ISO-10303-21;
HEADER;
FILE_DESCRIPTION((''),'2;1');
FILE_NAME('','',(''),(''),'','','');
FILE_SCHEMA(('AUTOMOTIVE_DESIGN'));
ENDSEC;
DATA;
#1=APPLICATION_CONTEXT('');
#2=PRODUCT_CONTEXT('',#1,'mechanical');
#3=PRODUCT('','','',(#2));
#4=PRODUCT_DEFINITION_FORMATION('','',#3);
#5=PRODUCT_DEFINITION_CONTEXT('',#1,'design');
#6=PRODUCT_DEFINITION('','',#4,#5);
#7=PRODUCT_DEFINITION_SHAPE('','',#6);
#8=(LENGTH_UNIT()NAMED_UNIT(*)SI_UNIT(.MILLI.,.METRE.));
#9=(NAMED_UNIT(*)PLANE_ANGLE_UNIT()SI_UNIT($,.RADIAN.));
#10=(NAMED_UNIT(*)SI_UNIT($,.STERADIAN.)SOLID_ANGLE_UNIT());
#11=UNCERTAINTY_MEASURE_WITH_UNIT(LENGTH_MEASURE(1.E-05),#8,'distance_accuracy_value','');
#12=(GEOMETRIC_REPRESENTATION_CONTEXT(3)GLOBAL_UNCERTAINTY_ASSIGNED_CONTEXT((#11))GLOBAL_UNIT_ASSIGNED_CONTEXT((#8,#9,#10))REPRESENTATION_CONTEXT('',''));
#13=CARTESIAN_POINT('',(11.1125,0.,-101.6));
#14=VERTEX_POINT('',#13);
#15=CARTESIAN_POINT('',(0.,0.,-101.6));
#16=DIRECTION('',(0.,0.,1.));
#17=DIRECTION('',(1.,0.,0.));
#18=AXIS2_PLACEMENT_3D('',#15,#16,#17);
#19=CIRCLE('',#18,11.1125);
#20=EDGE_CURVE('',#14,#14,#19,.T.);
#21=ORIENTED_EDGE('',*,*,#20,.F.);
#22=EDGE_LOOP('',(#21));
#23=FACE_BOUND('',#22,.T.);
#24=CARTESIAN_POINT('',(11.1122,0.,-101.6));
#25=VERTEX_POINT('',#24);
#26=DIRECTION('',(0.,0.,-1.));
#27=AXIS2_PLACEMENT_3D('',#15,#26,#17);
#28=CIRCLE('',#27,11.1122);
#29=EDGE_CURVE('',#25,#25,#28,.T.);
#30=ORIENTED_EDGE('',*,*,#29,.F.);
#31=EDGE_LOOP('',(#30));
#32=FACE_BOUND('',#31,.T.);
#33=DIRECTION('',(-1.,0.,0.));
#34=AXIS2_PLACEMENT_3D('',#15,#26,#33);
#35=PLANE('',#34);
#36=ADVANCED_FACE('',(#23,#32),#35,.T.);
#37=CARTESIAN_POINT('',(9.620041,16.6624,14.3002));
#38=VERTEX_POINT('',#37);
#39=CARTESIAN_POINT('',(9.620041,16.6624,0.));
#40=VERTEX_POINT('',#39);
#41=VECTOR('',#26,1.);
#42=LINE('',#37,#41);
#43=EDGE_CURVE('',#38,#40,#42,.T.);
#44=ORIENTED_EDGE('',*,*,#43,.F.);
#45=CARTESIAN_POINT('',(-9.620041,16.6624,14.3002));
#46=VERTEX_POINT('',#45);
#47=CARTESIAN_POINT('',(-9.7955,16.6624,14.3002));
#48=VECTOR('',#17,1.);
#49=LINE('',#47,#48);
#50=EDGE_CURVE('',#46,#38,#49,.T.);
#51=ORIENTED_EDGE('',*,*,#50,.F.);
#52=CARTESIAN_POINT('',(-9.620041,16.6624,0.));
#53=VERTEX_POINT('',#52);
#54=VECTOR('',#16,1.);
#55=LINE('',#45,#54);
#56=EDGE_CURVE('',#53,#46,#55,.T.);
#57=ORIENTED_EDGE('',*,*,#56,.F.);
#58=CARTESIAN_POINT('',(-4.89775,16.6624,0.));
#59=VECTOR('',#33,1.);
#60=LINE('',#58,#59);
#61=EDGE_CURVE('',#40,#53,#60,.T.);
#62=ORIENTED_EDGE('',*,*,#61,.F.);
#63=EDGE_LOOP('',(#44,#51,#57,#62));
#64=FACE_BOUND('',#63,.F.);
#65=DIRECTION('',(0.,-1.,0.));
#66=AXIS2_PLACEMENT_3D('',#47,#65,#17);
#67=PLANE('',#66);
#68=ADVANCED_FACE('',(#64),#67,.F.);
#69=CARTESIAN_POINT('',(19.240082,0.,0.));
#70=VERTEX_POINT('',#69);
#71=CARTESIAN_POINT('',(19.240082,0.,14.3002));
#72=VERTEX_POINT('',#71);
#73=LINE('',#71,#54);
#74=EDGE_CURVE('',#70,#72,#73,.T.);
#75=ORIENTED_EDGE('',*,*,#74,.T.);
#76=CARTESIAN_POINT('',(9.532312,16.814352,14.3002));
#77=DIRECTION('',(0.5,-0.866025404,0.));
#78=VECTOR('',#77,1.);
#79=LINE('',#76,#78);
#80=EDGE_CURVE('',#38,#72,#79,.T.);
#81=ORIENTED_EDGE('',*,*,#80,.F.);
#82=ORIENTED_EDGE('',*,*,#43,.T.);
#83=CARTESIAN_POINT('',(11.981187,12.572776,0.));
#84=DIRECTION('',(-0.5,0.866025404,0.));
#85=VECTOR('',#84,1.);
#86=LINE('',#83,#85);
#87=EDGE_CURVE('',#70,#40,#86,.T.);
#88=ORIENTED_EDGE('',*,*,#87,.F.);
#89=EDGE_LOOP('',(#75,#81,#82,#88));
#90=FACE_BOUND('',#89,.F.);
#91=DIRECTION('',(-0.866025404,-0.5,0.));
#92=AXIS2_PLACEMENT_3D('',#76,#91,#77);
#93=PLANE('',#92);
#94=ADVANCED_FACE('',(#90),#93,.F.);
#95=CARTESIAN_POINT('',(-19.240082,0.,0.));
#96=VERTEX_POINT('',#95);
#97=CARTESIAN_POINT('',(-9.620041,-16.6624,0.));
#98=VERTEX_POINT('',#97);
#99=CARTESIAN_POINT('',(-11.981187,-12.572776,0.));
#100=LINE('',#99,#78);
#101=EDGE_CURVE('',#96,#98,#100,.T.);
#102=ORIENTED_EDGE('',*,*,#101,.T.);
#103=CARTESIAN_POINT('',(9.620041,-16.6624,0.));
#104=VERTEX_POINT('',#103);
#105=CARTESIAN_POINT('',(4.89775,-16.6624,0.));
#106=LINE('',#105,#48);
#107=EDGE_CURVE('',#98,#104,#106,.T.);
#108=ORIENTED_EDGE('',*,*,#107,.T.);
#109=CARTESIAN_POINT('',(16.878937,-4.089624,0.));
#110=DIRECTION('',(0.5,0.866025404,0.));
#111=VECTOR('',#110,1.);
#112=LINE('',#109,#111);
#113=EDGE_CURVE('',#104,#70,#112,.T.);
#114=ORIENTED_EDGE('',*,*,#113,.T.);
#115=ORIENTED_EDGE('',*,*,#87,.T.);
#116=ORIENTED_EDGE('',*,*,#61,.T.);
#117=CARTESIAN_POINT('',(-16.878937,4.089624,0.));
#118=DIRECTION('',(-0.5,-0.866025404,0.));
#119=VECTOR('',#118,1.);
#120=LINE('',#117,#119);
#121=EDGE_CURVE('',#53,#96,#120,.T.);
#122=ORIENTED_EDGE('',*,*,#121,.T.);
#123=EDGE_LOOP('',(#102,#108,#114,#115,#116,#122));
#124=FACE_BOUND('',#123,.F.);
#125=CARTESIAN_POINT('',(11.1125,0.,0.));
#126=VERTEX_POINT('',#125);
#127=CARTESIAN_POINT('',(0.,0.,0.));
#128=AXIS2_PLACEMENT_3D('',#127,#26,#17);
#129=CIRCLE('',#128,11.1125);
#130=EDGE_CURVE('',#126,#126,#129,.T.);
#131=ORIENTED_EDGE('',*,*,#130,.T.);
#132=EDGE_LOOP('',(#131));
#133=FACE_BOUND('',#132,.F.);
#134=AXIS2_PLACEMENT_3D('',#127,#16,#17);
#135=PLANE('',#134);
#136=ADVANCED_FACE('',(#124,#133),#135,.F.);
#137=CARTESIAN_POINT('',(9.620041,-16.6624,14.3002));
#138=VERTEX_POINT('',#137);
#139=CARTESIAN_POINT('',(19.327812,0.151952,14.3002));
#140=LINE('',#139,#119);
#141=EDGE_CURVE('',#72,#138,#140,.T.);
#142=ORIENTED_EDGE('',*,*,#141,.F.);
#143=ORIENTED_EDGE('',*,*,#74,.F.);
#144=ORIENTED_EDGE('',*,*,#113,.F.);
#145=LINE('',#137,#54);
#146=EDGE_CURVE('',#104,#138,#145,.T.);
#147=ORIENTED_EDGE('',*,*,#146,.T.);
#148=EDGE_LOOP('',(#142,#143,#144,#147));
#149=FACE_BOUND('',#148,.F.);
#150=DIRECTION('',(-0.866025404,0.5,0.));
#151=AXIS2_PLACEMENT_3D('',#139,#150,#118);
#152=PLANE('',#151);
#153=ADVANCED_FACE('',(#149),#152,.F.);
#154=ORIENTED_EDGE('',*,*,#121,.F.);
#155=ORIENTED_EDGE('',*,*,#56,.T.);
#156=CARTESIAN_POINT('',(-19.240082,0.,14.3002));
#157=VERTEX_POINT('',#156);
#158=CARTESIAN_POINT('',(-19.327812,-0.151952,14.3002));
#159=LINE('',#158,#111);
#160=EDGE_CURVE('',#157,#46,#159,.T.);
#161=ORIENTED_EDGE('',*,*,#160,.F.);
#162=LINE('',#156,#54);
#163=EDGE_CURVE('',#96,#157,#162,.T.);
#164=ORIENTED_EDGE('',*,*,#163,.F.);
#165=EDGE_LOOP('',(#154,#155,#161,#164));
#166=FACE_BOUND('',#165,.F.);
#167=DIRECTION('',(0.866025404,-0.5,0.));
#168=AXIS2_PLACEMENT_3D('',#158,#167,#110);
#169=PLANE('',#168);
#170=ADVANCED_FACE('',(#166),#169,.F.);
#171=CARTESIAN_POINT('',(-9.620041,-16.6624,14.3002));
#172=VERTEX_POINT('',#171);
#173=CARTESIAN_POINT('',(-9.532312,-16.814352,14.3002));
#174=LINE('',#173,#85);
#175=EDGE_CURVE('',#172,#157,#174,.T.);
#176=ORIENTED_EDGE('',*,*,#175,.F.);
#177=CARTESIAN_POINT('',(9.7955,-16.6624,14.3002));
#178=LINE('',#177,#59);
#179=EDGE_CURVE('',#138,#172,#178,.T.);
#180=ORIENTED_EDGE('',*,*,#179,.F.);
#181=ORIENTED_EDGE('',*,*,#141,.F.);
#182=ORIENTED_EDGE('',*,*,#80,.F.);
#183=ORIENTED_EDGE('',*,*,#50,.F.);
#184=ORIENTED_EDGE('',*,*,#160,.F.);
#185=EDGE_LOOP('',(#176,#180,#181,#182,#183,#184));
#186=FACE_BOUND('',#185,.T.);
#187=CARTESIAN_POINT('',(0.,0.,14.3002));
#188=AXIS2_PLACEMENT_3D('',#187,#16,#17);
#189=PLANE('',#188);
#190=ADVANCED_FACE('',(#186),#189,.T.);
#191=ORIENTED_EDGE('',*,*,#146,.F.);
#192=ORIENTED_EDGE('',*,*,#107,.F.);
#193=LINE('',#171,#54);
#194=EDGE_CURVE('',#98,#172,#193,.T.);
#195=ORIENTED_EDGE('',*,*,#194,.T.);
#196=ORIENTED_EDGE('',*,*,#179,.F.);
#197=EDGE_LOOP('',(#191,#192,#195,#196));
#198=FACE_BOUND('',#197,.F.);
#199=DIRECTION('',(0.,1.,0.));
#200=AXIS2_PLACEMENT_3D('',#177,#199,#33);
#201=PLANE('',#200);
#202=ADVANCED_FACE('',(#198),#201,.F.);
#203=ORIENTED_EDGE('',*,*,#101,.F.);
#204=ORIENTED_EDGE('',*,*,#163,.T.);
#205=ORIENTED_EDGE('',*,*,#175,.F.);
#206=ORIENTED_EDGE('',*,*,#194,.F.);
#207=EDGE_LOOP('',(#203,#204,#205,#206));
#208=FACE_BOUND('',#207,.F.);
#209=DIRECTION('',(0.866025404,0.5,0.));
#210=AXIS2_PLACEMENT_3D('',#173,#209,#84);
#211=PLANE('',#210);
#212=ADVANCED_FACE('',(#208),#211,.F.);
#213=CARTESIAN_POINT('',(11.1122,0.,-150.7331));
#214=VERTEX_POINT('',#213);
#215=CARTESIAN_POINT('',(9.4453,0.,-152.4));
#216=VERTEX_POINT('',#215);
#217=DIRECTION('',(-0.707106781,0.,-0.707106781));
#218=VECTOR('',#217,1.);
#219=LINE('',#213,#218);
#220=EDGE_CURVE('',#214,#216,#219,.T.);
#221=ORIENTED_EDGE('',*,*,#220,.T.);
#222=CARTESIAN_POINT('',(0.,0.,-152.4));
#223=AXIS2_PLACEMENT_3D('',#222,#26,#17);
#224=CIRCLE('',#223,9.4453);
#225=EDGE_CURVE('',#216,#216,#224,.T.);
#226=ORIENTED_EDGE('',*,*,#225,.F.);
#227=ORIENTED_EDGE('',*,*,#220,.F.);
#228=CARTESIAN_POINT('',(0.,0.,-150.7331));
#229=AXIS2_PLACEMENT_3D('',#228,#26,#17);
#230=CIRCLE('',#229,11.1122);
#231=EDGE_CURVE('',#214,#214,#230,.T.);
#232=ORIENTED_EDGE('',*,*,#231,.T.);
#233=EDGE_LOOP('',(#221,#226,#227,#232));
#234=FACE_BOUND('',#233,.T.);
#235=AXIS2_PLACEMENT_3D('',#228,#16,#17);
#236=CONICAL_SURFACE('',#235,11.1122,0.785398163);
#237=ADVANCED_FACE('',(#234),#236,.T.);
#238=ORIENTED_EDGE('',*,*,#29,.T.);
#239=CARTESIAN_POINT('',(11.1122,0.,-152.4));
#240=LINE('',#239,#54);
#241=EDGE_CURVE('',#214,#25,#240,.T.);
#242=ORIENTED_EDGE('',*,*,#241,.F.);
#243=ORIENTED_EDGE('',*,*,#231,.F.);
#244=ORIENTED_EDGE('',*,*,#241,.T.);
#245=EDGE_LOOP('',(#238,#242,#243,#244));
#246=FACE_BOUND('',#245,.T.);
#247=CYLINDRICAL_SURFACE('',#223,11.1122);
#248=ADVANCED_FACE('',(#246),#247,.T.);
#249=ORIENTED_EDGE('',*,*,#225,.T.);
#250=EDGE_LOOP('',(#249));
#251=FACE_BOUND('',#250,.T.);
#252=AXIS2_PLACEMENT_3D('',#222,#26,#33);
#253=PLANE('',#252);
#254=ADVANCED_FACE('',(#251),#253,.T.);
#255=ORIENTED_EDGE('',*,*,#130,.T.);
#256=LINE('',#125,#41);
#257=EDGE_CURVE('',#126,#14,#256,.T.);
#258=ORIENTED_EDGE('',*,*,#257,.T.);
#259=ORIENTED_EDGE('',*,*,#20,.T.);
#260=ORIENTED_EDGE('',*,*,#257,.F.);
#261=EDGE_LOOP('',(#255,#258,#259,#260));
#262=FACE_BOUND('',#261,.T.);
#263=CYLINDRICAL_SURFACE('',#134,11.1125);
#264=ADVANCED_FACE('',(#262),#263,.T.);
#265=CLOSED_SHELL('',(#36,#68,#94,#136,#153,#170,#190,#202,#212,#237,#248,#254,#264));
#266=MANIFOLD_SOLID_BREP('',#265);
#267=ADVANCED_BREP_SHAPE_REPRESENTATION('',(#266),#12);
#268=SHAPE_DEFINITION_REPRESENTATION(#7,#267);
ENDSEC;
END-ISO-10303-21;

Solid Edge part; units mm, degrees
sketch "Sketch1" plane through (0, 0, 0) normal (0, 0, 1) x (1, 0, 0)
  circle A0 centre (0, 0) radius 19.3284
  dimension "D1" = 38.6568
extrude "Protrusion1" add sketch "Sketch1" along normal blind 14.3002
sketch "Sketch2" plane through (0, 0, 0) normal (0, 0, -1) x (1, 0, 0)
  circle A0 centre (0, 0) radius 11.1125
extrude "Protrusion2" add sketch "Sketch2" along normal blind 152.4
sketch "Sketch3" plane through (0, 0, -152.4) normal (0, 0, -1) x (1, 0, 0)
  circle A0 centre (0, 0) radius 11.1122
extrude "Cutout1" cut sketch "Sketch3" against normal blind 50.8 flip side to cut
chamfer "Chamfer_1" distance 1.6669 angle 45 1 edges at (-11.1122, 0, -152.4)
sketch "Sketch4" plane through (0, 0, 14.3002) normal (0, 0, 1) x (1, 0, 0)
  line L0 (-9.7955, 16.6624) -> (9.7955, 16.6624)
  dimension "D1" = 33.3248
extrude "Cutout2" cut sketch "Sketch4" against normal up to next material side at (0, 16.7124, 14.3002)
pattern_circular "Pattern1" count 6 over 360 about axis through (0, 0, 14.3002) along (0, 0, 1) of "Cutout2"
properties part number "24107209"
